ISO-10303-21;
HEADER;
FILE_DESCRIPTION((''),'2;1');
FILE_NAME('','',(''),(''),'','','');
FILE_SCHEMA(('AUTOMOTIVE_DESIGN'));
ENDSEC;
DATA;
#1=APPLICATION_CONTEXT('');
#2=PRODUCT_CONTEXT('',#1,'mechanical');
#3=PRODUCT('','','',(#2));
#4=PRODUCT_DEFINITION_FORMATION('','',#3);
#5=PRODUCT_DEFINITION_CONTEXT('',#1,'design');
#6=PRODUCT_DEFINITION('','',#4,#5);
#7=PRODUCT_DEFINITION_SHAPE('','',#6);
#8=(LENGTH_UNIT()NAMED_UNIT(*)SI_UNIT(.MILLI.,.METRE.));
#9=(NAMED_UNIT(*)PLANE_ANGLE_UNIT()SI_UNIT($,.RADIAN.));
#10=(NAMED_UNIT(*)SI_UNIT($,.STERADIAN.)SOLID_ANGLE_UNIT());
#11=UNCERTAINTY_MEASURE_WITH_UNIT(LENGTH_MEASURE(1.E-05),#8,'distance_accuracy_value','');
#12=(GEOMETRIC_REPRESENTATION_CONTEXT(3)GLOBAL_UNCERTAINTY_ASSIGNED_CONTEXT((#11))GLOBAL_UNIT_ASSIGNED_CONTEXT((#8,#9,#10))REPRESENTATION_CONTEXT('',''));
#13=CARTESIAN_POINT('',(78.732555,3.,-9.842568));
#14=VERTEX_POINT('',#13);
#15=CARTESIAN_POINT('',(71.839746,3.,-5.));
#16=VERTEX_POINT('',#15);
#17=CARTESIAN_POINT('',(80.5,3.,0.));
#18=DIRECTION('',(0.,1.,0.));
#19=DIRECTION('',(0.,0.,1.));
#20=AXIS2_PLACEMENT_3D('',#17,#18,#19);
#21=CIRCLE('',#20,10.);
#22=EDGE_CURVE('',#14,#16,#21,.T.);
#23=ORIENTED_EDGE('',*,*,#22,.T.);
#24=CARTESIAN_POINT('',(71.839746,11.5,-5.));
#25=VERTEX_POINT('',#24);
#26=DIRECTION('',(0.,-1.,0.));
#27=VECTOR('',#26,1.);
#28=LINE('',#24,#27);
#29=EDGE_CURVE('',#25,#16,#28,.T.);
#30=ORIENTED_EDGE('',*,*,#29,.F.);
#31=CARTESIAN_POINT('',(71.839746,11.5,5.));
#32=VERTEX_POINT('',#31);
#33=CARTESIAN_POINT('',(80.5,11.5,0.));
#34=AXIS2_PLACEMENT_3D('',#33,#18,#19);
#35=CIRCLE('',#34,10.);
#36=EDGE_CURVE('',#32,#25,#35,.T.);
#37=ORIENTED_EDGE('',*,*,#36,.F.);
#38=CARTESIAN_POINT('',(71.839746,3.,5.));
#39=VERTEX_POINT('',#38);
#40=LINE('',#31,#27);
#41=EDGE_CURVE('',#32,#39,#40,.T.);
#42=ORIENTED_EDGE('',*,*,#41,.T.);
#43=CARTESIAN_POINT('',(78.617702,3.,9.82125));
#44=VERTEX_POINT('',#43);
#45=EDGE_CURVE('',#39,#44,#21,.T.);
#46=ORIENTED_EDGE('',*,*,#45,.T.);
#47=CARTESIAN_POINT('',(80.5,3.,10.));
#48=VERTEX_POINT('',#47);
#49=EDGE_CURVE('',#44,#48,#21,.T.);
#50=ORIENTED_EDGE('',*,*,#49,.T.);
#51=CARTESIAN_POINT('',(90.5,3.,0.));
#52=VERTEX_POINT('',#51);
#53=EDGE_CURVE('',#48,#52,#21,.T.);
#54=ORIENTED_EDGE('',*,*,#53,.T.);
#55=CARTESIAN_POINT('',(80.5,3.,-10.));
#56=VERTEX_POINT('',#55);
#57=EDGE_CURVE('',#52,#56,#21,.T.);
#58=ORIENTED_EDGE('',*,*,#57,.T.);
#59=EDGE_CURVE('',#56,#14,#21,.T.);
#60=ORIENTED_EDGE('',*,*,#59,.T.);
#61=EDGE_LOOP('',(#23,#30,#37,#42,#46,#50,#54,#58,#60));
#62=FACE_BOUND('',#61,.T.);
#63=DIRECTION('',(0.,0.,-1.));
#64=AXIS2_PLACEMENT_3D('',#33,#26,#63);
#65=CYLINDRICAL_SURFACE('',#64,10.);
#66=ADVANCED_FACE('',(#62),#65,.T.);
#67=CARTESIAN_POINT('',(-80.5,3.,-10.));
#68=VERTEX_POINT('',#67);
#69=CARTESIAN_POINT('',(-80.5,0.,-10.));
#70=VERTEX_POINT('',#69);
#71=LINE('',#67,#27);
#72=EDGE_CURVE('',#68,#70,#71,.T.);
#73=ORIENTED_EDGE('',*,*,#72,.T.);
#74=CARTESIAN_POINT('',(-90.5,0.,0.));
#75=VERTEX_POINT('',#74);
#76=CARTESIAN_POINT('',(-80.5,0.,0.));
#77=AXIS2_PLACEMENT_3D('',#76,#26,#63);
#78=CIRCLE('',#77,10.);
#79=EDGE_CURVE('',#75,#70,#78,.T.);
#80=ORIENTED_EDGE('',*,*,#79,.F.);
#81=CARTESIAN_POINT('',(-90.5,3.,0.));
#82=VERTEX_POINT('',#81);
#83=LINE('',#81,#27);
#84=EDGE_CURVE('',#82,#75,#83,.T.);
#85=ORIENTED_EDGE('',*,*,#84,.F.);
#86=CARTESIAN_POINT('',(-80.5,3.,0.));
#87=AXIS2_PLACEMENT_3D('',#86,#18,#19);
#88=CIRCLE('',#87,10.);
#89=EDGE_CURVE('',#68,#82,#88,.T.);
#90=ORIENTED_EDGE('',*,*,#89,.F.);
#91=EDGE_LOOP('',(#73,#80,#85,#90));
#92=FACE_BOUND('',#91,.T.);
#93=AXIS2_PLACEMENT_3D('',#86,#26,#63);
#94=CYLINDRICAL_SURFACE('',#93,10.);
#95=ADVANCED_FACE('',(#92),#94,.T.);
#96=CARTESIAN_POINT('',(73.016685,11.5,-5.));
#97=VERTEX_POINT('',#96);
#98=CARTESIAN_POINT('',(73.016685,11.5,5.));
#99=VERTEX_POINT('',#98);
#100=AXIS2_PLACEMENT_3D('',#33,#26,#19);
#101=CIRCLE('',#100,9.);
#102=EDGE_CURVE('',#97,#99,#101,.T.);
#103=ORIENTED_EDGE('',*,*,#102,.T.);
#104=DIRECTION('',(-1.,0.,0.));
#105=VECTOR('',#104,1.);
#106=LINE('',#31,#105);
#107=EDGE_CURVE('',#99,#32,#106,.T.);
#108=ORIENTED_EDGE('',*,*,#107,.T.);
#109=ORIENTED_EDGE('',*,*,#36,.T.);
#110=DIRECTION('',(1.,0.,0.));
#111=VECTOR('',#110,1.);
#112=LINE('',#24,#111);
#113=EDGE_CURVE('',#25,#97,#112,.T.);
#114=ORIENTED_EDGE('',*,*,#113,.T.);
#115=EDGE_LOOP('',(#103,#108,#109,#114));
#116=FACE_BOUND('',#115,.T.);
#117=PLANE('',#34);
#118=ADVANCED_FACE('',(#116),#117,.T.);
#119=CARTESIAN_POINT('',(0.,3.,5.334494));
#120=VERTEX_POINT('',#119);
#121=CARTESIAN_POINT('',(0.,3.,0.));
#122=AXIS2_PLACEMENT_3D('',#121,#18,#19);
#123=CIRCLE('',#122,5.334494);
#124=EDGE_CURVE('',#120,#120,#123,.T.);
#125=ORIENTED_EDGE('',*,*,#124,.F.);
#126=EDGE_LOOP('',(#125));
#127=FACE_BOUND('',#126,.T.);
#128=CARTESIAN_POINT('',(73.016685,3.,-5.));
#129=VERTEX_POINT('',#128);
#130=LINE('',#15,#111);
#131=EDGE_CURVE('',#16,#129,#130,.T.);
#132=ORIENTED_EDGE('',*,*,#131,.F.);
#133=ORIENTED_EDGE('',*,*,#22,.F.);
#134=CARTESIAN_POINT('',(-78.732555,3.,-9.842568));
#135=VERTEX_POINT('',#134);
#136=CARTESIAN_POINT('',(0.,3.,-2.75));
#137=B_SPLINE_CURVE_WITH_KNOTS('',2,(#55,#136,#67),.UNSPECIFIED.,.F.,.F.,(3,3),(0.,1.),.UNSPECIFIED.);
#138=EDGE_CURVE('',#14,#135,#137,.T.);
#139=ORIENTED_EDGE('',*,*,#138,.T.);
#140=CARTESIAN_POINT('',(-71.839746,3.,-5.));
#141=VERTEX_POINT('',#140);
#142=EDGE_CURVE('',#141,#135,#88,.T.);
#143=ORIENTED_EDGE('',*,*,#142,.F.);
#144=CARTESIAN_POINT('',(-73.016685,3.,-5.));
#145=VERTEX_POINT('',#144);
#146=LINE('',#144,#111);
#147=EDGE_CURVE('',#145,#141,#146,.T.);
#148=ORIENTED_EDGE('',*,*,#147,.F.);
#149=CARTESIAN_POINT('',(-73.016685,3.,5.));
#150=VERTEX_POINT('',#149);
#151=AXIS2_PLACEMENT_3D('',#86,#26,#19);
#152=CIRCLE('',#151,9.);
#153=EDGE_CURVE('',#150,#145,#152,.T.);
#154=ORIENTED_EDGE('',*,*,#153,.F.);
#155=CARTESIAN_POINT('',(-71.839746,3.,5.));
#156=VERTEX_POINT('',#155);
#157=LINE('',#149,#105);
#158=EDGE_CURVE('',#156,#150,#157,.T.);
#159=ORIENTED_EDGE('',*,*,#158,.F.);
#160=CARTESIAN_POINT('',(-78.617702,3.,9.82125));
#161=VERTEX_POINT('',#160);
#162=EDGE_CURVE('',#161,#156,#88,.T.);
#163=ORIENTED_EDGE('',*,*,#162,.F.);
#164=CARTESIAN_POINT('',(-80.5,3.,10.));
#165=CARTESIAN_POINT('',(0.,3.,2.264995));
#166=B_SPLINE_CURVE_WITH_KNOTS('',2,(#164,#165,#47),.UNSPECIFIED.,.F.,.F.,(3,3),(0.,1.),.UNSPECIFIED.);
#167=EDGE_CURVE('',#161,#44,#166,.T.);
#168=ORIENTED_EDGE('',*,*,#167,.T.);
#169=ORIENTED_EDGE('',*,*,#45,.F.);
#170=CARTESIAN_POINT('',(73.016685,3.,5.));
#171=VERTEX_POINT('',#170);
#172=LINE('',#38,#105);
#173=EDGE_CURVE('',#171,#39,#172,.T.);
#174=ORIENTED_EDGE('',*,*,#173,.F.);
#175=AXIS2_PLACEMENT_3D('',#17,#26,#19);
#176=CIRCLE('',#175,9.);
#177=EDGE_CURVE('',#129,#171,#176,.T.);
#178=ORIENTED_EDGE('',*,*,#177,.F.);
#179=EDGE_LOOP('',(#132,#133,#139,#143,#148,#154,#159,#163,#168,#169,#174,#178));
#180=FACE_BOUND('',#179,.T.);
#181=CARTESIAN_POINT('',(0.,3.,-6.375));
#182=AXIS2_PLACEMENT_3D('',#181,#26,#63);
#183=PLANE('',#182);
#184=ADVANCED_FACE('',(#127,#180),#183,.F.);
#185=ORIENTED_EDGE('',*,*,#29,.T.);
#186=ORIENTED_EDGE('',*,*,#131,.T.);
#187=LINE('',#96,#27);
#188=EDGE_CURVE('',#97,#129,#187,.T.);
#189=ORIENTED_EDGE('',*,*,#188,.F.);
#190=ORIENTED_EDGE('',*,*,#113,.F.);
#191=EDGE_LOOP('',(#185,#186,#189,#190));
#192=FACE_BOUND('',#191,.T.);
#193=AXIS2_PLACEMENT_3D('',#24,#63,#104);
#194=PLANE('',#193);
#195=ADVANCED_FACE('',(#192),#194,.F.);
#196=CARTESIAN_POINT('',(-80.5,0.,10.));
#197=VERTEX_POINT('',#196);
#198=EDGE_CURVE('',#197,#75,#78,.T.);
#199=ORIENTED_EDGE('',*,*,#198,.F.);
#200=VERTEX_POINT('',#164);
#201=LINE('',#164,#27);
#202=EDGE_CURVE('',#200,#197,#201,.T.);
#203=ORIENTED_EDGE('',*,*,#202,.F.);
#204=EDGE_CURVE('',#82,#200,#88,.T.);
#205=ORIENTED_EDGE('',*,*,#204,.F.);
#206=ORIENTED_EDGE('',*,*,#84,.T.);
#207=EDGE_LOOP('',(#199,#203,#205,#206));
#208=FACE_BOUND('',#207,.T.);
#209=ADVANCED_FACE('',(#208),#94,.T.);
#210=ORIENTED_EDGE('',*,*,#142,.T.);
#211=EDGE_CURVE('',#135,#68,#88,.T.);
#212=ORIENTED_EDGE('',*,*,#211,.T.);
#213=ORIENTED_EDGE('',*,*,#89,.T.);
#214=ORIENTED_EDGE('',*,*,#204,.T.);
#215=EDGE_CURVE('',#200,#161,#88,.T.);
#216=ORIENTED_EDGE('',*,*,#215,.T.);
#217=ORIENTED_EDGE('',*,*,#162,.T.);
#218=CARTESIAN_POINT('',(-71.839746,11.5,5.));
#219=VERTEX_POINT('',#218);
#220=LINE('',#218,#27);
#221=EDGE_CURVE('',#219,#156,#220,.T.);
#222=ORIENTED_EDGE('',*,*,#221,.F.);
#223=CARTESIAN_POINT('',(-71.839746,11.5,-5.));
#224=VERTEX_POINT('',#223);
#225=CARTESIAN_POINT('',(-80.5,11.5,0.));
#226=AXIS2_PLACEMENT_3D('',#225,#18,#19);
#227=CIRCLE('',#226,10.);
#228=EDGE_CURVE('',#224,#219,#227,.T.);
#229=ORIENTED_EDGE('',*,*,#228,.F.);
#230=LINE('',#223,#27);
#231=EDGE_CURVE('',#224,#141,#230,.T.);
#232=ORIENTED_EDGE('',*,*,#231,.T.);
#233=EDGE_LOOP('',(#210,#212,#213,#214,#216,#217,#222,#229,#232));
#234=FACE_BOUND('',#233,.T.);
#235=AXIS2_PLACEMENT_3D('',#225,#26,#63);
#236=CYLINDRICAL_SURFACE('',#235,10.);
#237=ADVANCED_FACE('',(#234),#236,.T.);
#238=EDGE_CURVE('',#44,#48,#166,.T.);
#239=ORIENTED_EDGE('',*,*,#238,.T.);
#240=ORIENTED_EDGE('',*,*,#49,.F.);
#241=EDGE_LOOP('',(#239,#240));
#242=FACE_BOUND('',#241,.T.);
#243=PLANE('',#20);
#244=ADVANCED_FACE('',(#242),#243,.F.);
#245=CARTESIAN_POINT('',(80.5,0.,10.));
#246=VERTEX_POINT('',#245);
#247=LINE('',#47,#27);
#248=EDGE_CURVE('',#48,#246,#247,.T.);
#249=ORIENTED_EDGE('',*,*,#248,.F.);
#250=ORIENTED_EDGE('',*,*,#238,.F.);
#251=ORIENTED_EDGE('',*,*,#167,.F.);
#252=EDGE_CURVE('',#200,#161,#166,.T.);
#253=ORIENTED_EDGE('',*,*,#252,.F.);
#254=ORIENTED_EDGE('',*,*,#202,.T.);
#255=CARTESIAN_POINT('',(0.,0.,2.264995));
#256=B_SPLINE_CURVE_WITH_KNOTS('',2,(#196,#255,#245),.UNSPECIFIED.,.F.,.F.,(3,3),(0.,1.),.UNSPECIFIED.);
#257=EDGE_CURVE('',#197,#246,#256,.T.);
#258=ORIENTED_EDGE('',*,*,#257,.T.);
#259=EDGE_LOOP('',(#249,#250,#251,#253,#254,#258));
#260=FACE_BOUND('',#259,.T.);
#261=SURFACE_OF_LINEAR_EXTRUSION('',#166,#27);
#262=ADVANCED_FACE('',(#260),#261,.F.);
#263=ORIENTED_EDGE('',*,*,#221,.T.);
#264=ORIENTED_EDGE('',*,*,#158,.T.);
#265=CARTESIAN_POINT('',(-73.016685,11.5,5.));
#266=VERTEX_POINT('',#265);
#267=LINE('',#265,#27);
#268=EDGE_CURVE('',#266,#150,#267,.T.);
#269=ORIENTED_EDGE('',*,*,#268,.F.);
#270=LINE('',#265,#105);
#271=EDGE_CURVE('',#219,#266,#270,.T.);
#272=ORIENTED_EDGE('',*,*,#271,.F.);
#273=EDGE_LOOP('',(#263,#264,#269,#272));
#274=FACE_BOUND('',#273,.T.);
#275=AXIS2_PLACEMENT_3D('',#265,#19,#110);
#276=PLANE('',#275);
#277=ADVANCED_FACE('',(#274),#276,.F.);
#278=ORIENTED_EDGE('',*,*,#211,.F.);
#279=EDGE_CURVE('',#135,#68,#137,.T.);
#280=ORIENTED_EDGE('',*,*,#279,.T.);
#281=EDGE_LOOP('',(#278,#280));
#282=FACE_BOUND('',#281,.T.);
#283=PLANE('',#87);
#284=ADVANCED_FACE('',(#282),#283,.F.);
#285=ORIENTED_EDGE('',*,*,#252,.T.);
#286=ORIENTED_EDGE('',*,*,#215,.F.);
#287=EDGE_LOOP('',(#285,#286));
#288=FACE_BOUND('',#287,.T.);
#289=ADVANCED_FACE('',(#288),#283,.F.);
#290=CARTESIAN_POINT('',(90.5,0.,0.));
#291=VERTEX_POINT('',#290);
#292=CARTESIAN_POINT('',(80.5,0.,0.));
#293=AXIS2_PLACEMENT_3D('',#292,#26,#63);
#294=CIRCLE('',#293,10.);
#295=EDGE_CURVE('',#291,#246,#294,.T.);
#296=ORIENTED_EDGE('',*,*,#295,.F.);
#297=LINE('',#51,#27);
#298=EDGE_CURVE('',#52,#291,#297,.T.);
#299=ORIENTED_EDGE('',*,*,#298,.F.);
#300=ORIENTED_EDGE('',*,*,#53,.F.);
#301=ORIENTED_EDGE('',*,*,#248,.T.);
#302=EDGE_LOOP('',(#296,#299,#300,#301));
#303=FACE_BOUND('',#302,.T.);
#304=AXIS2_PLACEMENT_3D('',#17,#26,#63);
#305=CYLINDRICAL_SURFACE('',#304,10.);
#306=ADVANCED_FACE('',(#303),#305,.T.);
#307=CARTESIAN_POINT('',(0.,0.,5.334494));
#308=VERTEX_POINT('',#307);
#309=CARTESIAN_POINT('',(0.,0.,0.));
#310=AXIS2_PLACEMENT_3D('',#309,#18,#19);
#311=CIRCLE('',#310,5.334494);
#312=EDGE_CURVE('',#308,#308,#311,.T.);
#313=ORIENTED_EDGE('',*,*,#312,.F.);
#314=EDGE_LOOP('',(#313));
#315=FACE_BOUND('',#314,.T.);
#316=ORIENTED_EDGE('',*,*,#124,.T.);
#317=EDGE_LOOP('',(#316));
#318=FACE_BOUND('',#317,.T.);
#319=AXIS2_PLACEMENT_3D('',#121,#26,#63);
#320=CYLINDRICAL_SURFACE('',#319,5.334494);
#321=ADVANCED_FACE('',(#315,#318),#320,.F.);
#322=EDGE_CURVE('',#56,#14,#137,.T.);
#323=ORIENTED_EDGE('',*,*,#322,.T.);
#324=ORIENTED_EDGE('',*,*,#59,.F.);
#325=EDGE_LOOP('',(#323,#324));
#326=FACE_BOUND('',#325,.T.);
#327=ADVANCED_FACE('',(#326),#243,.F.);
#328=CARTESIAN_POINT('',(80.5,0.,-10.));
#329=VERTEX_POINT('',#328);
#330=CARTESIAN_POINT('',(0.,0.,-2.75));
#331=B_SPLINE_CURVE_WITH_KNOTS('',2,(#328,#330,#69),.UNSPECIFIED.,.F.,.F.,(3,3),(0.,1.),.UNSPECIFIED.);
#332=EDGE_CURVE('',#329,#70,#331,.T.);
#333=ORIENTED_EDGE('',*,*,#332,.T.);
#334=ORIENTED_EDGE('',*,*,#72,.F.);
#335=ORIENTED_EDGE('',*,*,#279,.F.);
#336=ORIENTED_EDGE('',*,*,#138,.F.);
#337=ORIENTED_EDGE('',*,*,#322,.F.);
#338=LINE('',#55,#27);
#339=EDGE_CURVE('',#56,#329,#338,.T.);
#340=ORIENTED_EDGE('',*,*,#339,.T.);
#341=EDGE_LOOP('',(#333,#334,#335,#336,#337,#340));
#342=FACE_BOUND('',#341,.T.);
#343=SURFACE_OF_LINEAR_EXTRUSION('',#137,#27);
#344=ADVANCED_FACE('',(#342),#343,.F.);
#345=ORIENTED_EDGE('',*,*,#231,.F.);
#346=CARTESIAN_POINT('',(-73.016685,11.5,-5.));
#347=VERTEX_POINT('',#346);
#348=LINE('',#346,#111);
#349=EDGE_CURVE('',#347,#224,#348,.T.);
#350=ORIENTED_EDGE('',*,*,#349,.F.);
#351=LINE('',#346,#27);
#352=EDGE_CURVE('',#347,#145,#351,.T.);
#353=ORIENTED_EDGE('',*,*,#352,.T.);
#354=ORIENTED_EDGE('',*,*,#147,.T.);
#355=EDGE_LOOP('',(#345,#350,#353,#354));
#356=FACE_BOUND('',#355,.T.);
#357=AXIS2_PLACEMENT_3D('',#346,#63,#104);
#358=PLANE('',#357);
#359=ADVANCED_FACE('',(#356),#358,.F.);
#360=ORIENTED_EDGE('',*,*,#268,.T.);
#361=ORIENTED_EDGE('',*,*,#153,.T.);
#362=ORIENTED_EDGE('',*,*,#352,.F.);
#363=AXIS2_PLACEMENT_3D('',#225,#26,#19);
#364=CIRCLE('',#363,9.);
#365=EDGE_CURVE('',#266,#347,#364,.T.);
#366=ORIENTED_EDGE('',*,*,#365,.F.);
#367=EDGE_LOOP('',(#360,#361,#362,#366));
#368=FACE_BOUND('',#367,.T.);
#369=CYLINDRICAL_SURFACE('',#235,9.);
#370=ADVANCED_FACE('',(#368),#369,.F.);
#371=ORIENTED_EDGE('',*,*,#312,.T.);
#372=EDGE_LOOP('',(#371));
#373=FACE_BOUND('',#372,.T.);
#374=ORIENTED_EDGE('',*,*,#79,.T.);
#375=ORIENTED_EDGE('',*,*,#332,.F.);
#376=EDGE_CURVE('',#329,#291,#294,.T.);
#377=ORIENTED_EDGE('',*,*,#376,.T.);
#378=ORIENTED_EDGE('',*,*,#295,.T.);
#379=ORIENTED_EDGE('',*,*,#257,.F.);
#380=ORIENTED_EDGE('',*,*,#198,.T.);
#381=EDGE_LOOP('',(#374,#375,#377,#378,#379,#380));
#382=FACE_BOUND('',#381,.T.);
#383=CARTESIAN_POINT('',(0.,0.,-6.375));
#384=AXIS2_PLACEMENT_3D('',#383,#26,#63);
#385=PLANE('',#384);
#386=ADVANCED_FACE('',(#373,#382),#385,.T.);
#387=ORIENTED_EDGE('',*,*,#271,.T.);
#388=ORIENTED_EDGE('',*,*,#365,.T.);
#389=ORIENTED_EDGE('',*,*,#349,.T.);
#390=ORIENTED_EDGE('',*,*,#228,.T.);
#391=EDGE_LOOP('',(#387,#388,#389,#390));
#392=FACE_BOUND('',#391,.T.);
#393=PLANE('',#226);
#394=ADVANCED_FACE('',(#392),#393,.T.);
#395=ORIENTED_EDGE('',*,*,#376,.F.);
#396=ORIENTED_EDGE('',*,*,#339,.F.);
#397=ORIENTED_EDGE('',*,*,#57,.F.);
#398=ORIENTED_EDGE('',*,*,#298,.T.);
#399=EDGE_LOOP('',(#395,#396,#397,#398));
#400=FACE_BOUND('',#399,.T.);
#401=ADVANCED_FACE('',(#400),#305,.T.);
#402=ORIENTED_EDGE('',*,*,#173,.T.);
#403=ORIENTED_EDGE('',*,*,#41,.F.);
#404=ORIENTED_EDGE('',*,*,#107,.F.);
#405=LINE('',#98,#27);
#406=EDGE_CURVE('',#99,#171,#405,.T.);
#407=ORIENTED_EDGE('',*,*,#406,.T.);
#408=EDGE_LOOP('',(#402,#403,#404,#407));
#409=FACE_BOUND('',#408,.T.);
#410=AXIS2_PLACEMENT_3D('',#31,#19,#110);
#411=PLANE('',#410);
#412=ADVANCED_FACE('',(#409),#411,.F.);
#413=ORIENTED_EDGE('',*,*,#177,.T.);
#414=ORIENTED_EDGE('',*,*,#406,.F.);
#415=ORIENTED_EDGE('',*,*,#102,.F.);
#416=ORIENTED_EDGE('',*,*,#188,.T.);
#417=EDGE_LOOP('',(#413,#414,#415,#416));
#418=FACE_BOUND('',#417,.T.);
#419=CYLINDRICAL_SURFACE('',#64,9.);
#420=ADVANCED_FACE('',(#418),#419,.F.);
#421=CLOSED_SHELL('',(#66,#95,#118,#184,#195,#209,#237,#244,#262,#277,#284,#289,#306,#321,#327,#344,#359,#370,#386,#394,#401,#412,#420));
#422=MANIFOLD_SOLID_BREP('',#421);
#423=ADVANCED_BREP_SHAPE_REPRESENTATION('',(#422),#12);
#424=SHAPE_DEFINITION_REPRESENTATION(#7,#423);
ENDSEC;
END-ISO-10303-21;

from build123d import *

# Parameters (mm, degrees)
SKETCH1_R           = 5.334493613
BOSS_EXTRUDE1_DEPTH = 3
BOSS_EXTRUDE3_DEPTH = 8.5
FILLET1_R           = 10


with BuildPart() as part:
    # Sketch1 → Boss-Extrude1 (new body)
    with BuildSketch(Plane(origin=(0, 0, 0), x_dir=(1, 0, 0), z_dir=(0, 1, 0))):
        with BuildLine():
            Line((-90.5, -10), (-90.5, 10))
            Line((-90.5, 10), (-80.5, 10))
            add(Edge.make_bspline(
                [(-80.5, 10), (0, 2.75), (80.5, 10)],
                knots=[0, 0, 0, 1, 1, 1], degree=2))
            Line((80.5, 10), (90.5, 10))
            Line((90.5, 10), (90.5, -10))
            Line((90.5, -10), (80.5, -10))
            add(Edge.make_bspline(
                [(-80.5, -10), (0, -2.264995309), (80.5, -10)],
                knots=[0, 0, 0, 1, 1, 1], degree=2))
            Line((-80.5, -10), (-90.5, -10))
        make_face()
        with Locations(Location((0, 0, 0), (0, 0, 270))):
            Circle(SKETCH1_R, mode=Mode.SUBTRACT)
    extrude(amount=BOSS_EXTRUDE1_DEPTH)

    # Sketch3 → Boss-Extrude3 (add)
    with BuildSketch(Plane(origin=(0, 3, 0), x_dir=(1, 0, 0), z_dir=(0, 1, 0))):
        with BuildLine():
            Line((71.839745962, 5), (73.016685226, 5))
            ThreePointArc((73.016685226, 5), (89.5, 0), (73.016685226, -5))
            Line((73.016685226, -5), (71.839745962, -5))
            ThreePointArc((71.839745962, -5), (90.5, 0), (71.839745962, 5))
        make_face()
        with BuildLine():
            Line((-73.016685226, -5), (-71.839745962, -5))
            ThreePointArc((-71.839745962, -5), (-90.5, 0), (-71.839745962, 5))
            Line((-71.839745962, 5), (-73.016685226, 5))
            ThreePointArc((-73.016685226, 5), (-89.5, 0), (-73.016685226, -5))
        make_face()
    extrude(amount=BOSS_EXTRUDE3_DEPTH)

    # Fillet1
    fillet1_edges = [part.edges().sort_by_distance(p)[0] for p in [
        (-90.5, 1.5, 10),
        (-90.5, 1.5, -10),
        (90.5, 1.5, -10),
        (90.5, 1.5, 10),
    ]]
    fillet(fillet1_edges, radius=FILLET1_R - 0.0001)  # a hair under: the kernel refuses the full size


solid = part.part
